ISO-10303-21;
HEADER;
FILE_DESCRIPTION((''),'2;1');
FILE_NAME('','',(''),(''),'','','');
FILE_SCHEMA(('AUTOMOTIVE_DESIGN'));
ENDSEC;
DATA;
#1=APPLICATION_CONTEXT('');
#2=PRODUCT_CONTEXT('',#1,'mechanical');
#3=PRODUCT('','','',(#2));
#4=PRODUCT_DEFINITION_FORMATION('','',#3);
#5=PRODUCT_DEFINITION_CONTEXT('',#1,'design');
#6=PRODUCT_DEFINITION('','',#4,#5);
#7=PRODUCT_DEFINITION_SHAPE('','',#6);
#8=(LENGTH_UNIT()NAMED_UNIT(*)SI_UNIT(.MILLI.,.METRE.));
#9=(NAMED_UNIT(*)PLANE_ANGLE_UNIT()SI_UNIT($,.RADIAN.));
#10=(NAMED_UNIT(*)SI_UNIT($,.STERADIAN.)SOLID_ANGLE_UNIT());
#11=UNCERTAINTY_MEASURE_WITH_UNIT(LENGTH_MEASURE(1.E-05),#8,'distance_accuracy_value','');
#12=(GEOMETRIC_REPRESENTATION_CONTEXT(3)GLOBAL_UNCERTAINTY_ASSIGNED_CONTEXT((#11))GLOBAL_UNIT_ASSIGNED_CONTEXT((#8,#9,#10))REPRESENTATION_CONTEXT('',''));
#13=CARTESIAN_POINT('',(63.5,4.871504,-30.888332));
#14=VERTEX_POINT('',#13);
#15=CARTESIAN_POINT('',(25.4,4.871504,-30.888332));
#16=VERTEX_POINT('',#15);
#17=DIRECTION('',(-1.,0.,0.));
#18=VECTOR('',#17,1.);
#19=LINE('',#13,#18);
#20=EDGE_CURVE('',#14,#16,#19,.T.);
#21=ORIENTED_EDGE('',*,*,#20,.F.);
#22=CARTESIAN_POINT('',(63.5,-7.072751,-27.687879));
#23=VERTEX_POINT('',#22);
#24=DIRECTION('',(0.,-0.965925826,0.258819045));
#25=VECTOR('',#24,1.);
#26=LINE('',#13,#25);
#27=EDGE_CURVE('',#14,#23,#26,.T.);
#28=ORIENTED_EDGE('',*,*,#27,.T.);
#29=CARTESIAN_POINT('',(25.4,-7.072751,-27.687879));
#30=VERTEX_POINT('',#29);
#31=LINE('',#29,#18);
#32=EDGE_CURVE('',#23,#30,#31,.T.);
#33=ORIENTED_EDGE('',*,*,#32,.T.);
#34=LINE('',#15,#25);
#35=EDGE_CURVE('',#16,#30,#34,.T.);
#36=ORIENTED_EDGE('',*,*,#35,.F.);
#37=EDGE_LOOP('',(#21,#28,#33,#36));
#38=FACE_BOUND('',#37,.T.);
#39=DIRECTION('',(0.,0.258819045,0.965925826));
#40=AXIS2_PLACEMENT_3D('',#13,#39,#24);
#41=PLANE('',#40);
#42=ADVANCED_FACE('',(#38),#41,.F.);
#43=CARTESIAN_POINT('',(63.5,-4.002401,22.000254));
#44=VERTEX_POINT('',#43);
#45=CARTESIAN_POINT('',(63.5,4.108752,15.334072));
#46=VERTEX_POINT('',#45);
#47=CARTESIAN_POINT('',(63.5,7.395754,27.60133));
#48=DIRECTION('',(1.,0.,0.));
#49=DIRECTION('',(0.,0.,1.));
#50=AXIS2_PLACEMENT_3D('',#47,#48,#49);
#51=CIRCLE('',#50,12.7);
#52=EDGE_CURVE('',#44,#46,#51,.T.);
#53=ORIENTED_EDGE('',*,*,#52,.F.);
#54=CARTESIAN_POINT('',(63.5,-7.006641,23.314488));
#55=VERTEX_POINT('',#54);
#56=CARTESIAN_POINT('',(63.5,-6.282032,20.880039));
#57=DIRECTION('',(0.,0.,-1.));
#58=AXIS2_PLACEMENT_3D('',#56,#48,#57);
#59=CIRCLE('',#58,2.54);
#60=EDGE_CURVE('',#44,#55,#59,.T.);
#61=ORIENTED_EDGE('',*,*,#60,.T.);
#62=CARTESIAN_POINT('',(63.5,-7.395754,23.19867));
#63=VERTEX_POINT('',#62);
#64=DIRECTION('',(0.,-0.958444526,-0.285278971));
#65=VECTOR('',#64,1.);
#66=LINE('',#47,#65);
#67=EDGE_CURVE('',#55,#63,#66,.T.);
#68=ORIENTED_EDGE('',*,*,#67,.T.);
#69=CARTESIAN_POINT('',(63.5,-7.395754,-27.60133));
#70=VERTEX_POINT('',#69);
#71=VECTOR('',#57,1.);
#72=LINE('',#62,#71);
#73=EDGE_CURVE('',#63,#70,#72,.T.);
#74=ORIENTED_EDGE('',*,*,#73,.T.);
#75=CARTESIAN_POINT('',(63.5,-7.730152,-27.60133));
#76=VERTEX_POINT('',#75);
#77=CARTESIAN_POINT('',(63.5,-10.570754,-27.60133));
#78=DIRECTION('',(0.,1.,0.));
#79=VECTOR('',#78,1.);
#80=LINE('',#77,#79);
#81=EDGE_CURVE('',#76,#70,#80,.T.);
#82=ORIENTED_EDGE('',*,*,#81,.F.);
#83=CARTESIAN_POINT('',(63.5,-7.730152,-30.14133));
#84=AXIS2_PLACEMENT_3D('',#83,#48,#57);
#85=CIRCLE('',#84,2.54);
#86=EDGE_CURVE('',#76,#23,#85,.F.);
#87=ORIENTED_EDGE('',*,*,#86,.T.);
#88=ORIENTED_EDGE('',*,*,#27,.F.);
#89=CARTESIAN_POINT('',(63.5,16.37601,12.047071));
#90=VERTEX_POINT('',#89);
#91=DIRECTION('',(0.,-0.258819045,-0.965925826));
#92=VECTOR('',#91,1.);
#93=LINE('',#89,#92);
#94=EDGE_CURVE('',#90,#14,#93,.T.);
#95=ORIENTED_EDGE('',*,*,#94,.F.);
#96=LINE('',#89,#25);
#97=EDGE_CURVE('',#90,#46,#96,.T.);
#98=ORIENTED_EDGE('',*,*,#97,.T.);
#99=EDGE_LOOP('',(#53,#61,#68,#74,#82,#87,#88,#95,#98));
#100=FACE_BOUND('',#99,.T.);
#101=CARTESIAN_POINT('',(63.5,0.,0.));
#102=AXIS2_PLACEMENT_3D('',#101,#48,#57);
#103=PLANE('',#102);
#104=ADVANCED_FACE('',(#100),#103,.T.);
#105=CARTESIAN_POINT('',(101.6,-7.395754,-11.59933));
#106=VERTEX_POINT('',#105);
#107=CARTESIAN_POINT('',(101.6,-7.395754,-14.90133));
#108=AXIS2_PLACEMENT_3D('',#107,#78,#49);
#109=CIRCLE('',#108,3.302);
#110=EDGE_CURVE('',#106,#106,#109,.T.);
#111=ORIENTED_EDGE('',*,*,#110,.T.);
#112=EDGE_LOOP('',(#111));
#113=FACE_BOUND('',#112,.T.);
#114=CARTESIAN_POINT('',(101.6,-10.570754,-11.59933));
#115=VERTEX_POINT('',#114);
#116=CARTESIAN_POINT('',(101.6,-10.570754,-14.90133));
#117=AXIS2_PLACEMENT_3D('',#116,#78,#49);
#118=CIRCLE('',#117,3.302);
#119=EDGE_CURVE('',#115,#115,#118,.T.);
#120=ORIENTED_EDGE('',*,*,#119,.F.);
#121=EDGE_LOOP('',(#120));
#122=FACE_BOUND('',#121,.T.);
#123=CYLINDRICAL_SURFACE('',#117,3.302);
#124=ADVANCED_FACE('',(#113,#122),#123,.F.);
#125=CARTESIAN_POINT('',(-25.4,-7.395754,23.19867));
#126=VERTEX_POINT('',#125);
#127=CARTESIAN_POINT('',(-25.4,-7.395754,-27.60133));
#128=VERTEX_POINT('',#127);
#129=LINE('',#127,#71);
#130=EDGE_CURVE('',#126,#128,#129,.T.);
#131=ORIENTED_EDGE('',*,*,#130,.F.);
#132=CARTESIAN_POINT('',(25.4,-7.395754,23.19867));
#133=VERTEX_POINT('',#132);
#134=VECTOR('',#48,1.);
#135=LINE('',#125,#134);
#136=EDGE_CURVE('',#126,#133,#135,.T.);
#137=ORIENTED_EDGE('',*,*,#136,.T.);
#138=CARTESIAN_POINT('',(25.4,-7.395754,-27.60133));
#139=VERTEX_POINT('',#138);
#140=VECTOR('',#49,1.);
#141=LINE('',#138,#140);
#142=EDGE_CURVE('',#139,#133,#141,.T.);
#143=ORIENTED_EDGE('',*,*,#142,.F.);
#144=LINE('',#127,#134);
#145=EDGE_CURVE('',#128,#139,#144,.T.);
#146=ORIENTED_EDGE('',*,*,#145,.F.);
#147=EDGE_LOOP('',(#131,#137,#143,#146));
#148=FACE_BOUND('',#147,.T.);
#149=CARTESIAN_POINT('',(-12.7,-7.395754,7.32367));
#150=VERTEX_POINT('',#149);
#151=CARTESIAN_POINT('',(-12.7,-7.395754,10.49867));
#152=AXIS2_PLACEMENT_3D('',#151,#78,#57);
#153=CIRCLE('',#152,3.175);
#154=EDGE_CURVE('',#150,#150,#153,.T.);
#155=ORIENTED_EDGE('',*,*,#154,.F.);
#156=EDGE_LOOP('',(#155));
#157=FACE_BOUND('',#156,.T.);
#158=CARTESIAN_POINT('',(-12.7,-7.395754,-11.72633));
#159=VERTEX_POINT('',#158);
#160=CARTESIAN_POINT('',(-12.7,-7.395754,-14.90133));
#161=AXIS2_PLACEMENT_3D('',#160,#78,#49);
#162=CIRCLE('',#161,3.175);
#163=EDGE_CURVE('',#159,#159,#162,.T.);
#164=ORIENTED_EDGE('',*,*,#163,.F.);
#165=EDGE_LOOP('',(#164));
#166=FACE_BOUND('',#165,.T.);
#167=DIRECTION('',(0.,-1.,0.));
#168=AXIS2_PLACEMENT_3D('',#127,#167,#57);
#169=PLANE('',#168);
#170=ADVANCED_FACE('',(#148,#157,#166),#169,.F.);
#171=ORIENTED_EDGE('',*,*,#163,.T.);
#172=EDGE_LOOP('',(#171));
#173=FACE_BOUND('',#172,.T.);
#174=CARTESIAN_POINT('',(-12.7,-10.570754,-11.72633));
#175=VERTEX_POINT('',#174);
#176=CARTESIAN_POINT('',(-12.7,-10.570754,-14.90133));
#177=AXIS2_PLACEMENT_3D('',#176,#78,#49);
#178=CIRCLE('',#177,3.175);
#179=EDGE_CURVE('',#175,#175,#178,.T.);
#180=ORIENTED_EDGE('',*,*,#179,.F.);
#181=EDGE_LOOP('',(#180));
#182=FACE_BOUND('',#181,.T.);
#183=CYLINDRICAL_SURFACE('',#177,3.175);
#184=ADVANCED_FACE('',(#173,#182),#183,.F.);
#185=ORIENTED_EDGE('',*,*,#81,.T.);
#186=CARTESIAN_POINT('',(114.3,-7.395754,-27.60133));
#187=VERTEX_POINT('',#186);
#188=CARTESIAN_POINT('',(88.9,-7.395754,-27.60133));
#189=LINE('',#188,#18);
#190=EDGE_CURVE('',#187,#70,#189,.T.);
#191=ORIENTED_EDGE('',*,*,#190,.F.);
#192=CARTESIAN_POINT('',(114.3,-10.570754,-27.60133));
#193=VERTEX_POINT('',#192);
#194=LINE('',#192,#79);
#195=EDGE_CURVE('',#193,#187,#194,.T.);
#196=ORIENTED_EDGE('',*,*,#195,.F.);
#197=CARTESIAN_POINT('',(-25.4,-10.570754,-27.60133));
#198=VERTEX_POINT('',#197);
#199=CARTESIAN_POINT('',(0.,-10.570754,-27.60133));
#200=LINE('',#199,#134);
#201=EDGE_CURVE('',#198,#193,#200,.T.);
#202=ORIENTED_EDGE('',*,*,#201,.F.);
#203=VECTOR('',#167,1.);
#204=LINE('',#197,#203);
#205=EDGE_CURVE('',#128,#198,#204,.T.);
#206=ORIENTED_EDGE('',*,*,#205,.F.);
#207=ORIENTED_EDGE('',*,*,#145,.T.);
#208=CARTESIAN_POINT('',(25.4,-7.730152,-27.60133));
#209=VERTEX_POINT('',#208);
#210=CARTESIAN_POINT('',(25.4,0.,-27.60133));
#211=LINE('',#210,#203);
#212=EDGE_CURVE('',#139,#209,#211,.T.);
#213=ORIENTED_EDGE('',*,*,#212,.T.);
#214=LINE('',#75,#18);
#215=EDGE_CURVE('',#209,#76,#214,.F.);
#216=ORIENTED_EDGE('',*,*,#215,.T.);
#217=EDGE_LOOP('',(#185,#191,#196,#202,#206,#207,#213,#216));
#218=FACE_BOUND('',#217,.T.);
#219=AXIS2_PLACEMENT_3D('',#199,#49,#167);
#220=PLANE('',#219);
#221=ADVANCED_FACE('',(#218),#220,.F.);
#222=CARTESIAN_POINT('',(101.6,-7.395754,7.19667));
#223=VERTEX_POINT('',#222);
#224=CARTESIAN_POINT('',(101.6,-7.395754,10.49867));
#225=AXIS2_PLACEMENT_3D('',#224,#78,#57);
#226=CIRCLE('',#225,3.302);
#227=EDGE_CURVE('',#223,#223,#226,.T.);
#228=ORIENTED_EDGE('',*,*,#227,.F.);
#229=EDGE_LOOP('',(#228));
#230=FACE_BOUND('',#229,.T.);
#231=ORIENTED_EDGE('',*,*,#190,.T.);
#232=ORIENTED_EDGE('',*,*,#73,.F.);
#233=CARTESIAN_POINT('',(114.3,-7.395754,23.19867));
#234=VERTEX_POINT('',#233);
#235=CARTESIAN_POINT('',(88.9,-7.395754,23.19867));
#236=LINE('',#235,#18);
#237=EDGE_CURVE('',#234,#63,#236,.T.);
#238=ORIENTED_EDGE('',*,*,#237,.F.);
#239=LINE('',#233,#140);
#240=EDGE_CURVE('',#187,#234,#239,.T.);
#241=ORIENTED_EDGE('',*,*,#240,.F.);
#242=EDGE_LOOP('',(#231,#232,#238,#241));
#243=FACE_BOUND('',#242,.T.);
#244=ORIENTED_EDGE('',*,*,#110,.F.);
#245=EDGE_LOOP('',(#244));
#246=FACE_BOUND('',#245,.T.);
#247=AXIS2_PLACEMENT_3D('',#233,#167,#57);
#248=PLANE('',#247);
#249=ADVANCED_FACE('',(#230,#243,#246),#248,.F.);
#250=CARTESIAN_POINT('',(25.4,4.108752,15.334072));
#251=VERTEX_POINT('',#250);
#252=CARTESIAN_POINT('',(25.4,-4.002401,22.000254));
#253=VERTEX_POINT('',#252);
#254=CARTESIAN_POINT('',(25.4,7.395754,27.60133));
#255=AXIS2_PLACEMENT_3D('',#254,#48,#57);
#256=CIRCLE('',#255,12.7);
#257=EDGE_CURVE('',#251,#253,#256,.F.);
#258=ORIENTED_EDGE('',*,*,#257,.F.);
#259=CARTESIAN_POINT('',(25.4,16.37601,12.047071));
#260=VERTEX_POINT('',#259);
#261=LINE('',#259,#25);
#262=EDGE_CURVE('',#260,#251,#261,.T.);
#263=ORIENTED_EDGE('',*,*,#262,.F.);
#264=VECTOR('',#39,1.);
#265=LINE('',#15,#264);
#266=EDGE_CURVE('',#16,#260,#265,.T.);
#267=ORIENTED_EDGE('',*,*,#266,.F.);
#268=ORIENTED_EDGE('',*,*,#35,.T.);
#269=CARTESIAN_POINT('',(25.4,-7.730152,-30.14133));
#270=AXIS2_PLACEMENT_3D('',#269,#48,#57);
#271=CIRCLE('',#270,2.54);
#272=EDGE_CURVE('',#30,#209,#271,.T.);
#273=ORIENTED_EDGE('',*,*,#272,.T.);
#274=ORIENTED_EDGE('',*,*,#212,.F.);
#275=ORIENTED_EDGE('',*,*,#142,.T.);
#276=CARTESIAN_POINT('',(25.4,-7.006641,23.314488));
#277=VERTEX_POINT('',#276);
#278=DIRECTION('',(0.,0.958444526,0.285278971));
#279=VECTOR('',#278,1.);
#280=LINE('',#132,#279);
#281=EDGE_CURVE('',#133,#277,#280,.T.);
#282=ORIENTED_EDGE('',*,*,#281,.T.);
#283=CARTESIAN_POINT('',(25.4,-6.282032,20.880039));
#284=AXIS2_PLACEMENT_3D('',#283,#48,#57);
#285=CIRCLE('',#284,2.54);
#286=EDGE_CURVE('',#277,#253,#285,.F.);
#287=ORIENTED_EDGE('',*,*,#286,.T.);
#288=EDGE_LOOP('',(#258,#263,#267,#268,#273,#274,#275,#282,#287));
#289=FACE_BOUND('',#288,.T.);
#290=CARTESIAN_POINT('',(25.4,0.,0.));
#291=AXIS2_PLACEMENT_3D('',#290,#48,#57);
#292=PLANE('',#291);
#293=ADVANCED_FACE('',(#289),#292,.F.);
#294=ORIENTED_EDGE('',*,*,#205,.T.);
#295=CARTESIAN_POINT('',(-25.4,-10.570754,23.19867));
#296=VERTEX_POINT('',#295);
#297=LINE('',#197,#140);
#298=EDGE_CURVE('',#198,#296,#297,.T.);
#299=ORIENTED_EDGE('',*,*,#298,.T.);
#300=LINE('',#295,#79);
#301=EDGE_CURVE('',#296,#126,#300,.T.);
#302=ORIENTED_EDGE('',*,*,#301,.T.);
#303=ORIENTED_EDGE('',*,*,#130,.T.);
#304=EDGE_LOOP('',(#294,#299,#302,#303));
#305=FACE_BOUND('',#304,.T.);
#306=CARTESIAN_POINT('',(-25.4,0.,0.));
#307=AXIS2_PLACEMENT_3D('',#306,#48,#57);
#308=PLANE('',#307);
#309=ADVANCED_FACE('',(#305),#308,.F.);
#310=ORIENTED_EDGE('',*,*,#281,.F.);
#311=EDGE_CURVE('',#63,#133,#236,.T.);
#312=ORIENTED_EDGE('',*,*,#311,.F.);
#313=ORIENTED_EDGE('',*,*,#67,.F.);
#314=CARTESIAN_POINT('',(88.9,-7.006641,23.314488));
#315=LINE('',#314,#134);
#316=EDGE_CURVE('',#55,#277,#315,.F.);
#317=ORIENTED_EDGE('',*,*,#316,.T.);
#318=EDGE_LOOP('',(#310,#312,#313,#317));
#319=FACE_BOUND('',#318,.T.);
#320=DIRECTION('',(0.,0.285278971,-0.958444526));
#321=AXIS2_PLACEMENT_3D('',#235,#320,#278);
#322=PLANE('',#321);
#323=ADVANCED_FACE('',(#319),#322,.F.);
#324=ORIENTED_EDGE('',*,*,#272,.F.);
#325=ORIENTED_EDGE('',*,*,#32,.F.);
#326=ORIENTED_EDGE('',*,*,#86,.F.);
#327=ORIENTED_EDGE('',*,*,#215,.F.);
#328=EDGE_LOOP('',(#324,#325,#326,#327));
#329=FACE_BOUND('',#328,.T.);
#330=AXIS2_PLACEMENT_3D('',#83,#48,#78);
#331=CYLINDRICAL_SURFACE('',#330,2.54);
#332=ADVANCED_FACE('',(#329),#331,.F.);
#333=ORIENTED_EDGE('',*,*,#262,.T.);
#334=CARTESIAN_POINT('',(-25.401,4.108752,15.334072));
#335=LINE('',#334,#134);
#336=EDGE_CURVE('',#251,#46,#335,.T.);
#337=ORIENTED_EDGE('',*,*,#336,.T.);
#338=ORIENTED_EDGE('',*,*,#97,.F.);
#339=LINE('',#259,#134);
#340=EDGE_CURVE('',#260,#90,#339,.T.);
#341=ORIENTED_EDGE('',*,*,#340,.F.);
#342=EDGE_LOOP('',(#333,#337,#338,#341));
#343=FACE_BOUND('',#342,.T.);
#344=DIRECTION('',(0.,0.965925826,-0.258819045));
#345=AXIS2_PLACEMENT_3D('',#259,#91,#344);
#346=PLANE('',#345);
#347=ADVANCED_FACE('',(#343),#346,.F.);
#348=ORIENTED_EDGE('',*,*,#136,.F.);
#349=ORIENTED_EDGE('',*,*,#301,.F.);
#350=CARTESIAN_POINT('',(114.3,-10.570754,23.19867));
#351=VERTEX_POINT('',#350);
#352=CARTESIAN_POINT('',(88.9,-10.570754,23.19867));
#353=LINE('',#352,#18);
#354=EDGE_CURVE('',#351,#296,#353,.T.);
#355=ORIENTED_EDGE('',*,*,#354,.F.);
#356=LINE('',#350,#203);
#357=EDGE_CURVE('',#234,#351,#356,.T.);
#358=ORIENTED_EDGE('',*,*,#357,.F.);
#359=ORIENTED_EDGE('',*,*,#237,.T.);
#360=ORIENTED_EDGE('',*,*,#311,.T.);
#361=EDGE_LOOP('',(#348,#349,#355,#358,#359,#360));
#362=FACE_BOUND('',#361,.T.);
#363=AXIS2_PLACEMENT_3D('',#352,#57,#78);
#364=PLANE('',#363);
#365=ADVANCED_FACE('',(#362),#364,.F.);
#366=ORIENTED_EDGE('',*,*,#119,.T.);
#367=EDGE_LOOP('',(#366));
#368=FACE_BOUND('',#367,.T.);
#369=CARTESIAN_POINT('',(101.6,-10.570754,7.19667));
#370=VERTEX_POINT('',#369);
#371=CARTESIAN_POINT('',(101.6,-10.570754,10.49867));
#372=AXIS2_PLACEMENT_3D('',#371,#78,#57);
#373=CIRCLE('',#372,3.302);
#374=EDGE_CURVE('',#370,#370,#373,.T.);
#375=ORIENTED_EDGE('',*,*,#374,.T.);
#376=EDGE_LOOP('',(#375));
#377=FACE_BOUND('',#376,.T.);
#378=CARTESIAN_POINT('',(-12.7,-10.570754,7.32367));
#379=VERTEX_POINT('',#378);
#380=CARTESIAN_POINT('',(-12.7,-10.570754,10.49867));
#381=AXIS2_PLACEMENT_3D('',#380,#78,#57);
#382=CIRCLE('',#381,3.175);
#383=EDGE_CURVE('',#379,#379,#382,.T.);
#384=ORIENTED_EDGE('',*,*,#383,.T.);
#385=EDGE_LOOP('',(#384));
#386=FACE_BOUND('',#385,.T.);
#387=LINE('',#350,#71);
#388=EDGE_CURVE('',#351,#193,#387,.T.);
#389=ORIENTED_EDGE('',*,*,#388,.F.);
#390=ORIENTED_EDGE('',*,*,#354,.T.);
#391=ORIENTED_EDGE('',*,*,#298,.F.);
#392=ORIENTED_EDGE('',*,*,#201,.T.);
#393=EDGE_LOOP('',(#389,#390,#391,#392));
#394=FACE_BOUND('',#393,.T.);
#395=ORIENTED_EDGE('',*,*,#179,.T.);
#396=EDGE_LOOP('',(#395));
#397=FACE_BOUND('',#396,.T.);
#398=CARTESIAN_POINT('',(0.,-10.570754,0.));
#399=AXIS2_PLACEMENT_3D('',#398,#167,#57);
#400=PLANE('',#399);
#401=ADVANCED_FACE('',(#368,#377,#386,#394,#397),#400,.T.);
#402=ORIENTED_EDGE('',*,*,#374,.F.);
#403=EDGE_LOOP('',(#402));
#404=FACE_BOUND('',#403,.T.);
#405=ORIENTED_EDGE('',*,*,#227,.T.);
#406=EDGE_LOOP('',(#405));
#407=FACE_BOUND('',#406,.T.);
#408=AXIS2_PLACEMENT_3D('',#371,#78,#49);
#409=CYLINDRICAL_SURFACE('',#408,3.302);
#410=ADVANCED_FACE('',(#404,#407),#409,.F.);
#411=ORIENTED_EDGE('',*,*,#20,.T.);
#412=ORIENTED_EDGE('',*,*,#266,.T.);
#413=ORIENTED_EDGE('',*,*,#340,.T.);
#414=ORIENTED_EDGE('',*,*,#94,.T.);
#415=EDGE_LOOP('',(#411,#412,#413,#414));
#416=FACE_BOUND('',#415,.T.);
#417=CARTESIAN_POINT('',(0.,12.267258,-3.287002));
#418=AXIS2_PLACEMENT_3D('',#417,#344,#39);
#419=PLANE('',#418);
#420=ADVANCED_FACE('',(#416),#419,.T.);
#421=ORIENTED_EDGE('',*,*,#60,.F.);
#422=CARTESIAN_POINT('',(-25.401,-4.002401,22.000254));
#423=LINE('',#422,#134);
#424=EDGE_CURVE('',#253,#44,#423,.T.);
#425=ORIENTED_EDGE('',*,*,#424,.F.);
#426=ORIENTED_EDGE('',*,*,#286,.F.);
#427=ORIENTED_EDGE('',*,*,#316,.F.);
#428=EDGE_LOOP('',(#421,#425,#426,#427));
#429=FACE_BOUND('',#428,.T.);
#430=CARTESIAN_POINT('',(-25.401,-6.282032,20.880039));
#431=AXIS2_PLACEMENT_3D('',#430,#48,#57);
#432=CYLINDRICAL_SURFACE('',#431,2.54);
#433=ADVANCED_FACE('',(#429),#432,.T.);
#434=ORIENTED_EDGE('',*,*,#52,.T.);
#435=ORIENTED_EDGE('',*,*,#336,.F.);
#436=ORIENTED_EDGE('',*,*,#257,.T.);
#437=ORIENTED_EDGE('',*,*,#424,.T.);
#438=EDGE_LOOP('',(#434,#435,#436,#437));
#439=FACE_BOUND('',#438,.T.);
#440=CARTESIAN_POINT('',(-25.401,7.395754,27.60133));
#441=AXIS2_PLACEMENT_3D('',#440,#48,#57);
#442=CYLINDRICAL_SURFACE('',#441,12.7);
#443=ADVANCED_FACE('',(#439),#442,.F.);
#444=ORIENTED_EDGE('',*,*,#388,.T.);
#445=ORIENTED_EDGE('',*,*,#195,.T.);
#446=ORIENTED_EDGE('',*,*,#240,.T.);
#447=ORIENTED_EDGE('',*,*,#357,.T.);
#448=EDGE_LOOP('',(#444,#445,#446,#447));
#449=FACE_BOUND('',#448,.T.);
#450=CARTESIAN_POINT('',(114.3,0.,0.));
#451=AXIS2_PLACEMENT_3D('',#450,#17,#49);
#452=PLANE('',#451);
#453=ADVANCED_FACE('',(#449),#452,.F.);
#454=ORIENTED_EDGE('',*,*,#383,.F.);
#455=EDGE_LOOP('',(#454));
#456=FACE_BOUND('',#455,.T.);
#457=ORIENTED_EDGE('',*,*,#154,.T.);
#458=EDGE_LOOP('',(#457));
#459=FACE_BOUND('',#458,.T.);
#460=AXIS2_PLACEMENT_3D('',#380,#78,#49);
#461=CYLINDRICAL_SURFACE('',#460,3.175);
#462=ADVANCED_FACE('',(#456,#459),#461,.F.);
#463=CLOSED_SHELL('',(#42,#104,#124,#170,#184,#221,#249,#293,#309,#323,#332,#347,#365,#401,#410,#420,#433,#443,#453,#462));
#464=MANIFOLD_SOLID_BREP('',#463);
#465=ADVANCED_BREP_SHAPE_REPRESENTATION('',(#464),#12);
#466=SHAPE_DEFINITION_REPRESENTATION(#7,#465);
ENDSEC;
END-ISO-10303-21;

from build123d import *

# Parameters (mm, degrees)
BOSS_EXTRUDE1_DEPTH   = 88.9
SKETCH2_W             = 88.9
SKETCH2_H             = 50.8
BOSS_EXTRUDE2_DEPTH   = 3.175
FILLET2_DEPTH         = 25.4
FILLET2_START         = 63.5
FILLET2_2_DEPTH       = 25.4
FILLET2_START_2       = 25.4
FILLET2_3_DEPTH       = 38.1
FILLET2_4_DEPTH       = 38.1
FILLET2_START_3       = -25.4
FILLET2_5_OUTLINE_W   = 3.175
FILLET2_5_OUTLINE_H   = 50.8
FILLET2_5_DEPTH       = 139.7
FILLET2_START_4       = -10.570754214
FILLET2_6_OUTLINE_R   = 3.302
FILLET2_6_OUTLINE_R_2 = 3.175
FILLET2_6_DEPTH       = 3.175


with BuildPart() as part:
    # Sketch1 → Boss-Extrude1 (new body)
    with BuildSketch(Plane(origin=(0, 0, 0), x_dir=(0, 0, -1), z_dir=(1, 0, 0))):
        Polygon((27.601330486, -7.395754214), (-23.198669514, -7.395754214), (-27.601330486, 7.395754214), align=None)
    extrude(amount=BOSS_EXTRUDE1_DEPTH)

    # Sketch2 → Boss-Extrude2 (add)
    with BuildSketch(Plane.XZ.offset(7.395754214)):
        with Locations((44.45, -2.201330486)):
            Rectangle(SKETCH2_W, SKETCH2_H)
    extrude(amount=BOSS_EXTRUDE2_DEPTH)

    # Fillet2: read off the stored shape, not the designer's step
    # Fillet2 outline → Fillet2 (cut)
    with BuildSketch(Plane.YZ):
        Polygon((-7.395754214, 23.198669514), (-7.395754214, -27.601330486), (7.395754214, 27.601330486), align=None)
    extrude(amount=FILLET2_DEPTH, mode=Mode.SUBTRACT)

    # Fillet2 2 outline → Fillet2 2 (cut)
    with BuildSketch(Plane.YZ.offset(FILLET2_START)):
        Polygon((-7.395754214, 23.198669514), (-7.395754214, -27.601330486), (7.395754214, 27.601330486), align=None)
    extrude(amount=FILLET2_2_DEPTH, mode=Mode.SUBTRACT)

    # Fillet2 3 outline → Fillet2 3 (cut)
    with BuildSketch(Plane.YZ.offset(FILLET2_START_2)):
        with BuildLine():
            Line((7.395754214, 27.601330486), (-7.00664086, 23.314488275))
            ThreePointArc((-7.00664086, 23.314488275), (-5.264031089, 23.20711322), (-4.002401192, 22.000254398))
            ThreePointArc((-4.002401192, 22.000254398), (-0.667927102, 17.789753466), (4.108752341, 15.334072492))
            Line((4.108752341, 15.334072492), (7.395754214, 27.601330486))
        make_face()
    extrude(amount=FILLET2_3_DEPTH, mode=Mode.SUBTRACT)

    # Fillet2 4 outline → Fillet2 4 (add)
    with BuildSketch(Plane.YZ.offset(FILLET2_START_2)):
        with BuildLine():
            Line((4.108752341, 15.334072492), (-7.395754214, -27.601330486))
            Line((-7.395754214, -27.601330486), (-7.730151558, -27.601330486))
            ThreePointArc((-7.730151558, -27.601330486), (-7.39861503, -27.623060538), (-7.072751183, -27.687878887))
            Line((-7.072751183, -27.687878887), (4.87150378, -30.888332359))
            Line((4.87150378, -30.888332359), (16.376010335, 12.04707062))
            Line((16.376010335, 12.04707062), (4.108752341, 15.334072492))
        make_face()
    extrude(amount=FILLET2_4_DEPTH)

    # Fillet2 5 outline → Fillet2 5 (add)
    with BuildSketch(Plane.YZ.offset(FILLET2_START_3)):
        with Locations((-8.983254214, -2.201330486)):
            Rectangle(FILLET2_5_OUTLINE_W, FILLET2_5_OUTLINE_H)
    extrude(amount=FILLET2_5_DEPTH)

    # Fillet2 6 outline → Fillet2 6 (cut)
    with BuildSketch(Plane(origin=(0, 0, 0), x_dir=(1, 0, 0), z_dir=(0, 1, 0)).offset(FILLET2_START_4)):
        with Locations((101.6, -10.498669514)):
            Circle(FILLET2_6_OUTLINE_R)
        with Locations((101.6, 14.901330486)):
            Circle(FILLET2_6_OUTLINE_R)
        with Locations((-12.7, -10.498669514)):
            Circle(FILLET2_6_OUTLINE_R_2)
        with Locations((-12.7, 14.901330486)):
            Circle(FILLET2_6_OUTLINE_R_2)
    extrude(amount=FILLET2_6_DEPTH, mode=Mode.SUBTRACT)


solid = part.part
